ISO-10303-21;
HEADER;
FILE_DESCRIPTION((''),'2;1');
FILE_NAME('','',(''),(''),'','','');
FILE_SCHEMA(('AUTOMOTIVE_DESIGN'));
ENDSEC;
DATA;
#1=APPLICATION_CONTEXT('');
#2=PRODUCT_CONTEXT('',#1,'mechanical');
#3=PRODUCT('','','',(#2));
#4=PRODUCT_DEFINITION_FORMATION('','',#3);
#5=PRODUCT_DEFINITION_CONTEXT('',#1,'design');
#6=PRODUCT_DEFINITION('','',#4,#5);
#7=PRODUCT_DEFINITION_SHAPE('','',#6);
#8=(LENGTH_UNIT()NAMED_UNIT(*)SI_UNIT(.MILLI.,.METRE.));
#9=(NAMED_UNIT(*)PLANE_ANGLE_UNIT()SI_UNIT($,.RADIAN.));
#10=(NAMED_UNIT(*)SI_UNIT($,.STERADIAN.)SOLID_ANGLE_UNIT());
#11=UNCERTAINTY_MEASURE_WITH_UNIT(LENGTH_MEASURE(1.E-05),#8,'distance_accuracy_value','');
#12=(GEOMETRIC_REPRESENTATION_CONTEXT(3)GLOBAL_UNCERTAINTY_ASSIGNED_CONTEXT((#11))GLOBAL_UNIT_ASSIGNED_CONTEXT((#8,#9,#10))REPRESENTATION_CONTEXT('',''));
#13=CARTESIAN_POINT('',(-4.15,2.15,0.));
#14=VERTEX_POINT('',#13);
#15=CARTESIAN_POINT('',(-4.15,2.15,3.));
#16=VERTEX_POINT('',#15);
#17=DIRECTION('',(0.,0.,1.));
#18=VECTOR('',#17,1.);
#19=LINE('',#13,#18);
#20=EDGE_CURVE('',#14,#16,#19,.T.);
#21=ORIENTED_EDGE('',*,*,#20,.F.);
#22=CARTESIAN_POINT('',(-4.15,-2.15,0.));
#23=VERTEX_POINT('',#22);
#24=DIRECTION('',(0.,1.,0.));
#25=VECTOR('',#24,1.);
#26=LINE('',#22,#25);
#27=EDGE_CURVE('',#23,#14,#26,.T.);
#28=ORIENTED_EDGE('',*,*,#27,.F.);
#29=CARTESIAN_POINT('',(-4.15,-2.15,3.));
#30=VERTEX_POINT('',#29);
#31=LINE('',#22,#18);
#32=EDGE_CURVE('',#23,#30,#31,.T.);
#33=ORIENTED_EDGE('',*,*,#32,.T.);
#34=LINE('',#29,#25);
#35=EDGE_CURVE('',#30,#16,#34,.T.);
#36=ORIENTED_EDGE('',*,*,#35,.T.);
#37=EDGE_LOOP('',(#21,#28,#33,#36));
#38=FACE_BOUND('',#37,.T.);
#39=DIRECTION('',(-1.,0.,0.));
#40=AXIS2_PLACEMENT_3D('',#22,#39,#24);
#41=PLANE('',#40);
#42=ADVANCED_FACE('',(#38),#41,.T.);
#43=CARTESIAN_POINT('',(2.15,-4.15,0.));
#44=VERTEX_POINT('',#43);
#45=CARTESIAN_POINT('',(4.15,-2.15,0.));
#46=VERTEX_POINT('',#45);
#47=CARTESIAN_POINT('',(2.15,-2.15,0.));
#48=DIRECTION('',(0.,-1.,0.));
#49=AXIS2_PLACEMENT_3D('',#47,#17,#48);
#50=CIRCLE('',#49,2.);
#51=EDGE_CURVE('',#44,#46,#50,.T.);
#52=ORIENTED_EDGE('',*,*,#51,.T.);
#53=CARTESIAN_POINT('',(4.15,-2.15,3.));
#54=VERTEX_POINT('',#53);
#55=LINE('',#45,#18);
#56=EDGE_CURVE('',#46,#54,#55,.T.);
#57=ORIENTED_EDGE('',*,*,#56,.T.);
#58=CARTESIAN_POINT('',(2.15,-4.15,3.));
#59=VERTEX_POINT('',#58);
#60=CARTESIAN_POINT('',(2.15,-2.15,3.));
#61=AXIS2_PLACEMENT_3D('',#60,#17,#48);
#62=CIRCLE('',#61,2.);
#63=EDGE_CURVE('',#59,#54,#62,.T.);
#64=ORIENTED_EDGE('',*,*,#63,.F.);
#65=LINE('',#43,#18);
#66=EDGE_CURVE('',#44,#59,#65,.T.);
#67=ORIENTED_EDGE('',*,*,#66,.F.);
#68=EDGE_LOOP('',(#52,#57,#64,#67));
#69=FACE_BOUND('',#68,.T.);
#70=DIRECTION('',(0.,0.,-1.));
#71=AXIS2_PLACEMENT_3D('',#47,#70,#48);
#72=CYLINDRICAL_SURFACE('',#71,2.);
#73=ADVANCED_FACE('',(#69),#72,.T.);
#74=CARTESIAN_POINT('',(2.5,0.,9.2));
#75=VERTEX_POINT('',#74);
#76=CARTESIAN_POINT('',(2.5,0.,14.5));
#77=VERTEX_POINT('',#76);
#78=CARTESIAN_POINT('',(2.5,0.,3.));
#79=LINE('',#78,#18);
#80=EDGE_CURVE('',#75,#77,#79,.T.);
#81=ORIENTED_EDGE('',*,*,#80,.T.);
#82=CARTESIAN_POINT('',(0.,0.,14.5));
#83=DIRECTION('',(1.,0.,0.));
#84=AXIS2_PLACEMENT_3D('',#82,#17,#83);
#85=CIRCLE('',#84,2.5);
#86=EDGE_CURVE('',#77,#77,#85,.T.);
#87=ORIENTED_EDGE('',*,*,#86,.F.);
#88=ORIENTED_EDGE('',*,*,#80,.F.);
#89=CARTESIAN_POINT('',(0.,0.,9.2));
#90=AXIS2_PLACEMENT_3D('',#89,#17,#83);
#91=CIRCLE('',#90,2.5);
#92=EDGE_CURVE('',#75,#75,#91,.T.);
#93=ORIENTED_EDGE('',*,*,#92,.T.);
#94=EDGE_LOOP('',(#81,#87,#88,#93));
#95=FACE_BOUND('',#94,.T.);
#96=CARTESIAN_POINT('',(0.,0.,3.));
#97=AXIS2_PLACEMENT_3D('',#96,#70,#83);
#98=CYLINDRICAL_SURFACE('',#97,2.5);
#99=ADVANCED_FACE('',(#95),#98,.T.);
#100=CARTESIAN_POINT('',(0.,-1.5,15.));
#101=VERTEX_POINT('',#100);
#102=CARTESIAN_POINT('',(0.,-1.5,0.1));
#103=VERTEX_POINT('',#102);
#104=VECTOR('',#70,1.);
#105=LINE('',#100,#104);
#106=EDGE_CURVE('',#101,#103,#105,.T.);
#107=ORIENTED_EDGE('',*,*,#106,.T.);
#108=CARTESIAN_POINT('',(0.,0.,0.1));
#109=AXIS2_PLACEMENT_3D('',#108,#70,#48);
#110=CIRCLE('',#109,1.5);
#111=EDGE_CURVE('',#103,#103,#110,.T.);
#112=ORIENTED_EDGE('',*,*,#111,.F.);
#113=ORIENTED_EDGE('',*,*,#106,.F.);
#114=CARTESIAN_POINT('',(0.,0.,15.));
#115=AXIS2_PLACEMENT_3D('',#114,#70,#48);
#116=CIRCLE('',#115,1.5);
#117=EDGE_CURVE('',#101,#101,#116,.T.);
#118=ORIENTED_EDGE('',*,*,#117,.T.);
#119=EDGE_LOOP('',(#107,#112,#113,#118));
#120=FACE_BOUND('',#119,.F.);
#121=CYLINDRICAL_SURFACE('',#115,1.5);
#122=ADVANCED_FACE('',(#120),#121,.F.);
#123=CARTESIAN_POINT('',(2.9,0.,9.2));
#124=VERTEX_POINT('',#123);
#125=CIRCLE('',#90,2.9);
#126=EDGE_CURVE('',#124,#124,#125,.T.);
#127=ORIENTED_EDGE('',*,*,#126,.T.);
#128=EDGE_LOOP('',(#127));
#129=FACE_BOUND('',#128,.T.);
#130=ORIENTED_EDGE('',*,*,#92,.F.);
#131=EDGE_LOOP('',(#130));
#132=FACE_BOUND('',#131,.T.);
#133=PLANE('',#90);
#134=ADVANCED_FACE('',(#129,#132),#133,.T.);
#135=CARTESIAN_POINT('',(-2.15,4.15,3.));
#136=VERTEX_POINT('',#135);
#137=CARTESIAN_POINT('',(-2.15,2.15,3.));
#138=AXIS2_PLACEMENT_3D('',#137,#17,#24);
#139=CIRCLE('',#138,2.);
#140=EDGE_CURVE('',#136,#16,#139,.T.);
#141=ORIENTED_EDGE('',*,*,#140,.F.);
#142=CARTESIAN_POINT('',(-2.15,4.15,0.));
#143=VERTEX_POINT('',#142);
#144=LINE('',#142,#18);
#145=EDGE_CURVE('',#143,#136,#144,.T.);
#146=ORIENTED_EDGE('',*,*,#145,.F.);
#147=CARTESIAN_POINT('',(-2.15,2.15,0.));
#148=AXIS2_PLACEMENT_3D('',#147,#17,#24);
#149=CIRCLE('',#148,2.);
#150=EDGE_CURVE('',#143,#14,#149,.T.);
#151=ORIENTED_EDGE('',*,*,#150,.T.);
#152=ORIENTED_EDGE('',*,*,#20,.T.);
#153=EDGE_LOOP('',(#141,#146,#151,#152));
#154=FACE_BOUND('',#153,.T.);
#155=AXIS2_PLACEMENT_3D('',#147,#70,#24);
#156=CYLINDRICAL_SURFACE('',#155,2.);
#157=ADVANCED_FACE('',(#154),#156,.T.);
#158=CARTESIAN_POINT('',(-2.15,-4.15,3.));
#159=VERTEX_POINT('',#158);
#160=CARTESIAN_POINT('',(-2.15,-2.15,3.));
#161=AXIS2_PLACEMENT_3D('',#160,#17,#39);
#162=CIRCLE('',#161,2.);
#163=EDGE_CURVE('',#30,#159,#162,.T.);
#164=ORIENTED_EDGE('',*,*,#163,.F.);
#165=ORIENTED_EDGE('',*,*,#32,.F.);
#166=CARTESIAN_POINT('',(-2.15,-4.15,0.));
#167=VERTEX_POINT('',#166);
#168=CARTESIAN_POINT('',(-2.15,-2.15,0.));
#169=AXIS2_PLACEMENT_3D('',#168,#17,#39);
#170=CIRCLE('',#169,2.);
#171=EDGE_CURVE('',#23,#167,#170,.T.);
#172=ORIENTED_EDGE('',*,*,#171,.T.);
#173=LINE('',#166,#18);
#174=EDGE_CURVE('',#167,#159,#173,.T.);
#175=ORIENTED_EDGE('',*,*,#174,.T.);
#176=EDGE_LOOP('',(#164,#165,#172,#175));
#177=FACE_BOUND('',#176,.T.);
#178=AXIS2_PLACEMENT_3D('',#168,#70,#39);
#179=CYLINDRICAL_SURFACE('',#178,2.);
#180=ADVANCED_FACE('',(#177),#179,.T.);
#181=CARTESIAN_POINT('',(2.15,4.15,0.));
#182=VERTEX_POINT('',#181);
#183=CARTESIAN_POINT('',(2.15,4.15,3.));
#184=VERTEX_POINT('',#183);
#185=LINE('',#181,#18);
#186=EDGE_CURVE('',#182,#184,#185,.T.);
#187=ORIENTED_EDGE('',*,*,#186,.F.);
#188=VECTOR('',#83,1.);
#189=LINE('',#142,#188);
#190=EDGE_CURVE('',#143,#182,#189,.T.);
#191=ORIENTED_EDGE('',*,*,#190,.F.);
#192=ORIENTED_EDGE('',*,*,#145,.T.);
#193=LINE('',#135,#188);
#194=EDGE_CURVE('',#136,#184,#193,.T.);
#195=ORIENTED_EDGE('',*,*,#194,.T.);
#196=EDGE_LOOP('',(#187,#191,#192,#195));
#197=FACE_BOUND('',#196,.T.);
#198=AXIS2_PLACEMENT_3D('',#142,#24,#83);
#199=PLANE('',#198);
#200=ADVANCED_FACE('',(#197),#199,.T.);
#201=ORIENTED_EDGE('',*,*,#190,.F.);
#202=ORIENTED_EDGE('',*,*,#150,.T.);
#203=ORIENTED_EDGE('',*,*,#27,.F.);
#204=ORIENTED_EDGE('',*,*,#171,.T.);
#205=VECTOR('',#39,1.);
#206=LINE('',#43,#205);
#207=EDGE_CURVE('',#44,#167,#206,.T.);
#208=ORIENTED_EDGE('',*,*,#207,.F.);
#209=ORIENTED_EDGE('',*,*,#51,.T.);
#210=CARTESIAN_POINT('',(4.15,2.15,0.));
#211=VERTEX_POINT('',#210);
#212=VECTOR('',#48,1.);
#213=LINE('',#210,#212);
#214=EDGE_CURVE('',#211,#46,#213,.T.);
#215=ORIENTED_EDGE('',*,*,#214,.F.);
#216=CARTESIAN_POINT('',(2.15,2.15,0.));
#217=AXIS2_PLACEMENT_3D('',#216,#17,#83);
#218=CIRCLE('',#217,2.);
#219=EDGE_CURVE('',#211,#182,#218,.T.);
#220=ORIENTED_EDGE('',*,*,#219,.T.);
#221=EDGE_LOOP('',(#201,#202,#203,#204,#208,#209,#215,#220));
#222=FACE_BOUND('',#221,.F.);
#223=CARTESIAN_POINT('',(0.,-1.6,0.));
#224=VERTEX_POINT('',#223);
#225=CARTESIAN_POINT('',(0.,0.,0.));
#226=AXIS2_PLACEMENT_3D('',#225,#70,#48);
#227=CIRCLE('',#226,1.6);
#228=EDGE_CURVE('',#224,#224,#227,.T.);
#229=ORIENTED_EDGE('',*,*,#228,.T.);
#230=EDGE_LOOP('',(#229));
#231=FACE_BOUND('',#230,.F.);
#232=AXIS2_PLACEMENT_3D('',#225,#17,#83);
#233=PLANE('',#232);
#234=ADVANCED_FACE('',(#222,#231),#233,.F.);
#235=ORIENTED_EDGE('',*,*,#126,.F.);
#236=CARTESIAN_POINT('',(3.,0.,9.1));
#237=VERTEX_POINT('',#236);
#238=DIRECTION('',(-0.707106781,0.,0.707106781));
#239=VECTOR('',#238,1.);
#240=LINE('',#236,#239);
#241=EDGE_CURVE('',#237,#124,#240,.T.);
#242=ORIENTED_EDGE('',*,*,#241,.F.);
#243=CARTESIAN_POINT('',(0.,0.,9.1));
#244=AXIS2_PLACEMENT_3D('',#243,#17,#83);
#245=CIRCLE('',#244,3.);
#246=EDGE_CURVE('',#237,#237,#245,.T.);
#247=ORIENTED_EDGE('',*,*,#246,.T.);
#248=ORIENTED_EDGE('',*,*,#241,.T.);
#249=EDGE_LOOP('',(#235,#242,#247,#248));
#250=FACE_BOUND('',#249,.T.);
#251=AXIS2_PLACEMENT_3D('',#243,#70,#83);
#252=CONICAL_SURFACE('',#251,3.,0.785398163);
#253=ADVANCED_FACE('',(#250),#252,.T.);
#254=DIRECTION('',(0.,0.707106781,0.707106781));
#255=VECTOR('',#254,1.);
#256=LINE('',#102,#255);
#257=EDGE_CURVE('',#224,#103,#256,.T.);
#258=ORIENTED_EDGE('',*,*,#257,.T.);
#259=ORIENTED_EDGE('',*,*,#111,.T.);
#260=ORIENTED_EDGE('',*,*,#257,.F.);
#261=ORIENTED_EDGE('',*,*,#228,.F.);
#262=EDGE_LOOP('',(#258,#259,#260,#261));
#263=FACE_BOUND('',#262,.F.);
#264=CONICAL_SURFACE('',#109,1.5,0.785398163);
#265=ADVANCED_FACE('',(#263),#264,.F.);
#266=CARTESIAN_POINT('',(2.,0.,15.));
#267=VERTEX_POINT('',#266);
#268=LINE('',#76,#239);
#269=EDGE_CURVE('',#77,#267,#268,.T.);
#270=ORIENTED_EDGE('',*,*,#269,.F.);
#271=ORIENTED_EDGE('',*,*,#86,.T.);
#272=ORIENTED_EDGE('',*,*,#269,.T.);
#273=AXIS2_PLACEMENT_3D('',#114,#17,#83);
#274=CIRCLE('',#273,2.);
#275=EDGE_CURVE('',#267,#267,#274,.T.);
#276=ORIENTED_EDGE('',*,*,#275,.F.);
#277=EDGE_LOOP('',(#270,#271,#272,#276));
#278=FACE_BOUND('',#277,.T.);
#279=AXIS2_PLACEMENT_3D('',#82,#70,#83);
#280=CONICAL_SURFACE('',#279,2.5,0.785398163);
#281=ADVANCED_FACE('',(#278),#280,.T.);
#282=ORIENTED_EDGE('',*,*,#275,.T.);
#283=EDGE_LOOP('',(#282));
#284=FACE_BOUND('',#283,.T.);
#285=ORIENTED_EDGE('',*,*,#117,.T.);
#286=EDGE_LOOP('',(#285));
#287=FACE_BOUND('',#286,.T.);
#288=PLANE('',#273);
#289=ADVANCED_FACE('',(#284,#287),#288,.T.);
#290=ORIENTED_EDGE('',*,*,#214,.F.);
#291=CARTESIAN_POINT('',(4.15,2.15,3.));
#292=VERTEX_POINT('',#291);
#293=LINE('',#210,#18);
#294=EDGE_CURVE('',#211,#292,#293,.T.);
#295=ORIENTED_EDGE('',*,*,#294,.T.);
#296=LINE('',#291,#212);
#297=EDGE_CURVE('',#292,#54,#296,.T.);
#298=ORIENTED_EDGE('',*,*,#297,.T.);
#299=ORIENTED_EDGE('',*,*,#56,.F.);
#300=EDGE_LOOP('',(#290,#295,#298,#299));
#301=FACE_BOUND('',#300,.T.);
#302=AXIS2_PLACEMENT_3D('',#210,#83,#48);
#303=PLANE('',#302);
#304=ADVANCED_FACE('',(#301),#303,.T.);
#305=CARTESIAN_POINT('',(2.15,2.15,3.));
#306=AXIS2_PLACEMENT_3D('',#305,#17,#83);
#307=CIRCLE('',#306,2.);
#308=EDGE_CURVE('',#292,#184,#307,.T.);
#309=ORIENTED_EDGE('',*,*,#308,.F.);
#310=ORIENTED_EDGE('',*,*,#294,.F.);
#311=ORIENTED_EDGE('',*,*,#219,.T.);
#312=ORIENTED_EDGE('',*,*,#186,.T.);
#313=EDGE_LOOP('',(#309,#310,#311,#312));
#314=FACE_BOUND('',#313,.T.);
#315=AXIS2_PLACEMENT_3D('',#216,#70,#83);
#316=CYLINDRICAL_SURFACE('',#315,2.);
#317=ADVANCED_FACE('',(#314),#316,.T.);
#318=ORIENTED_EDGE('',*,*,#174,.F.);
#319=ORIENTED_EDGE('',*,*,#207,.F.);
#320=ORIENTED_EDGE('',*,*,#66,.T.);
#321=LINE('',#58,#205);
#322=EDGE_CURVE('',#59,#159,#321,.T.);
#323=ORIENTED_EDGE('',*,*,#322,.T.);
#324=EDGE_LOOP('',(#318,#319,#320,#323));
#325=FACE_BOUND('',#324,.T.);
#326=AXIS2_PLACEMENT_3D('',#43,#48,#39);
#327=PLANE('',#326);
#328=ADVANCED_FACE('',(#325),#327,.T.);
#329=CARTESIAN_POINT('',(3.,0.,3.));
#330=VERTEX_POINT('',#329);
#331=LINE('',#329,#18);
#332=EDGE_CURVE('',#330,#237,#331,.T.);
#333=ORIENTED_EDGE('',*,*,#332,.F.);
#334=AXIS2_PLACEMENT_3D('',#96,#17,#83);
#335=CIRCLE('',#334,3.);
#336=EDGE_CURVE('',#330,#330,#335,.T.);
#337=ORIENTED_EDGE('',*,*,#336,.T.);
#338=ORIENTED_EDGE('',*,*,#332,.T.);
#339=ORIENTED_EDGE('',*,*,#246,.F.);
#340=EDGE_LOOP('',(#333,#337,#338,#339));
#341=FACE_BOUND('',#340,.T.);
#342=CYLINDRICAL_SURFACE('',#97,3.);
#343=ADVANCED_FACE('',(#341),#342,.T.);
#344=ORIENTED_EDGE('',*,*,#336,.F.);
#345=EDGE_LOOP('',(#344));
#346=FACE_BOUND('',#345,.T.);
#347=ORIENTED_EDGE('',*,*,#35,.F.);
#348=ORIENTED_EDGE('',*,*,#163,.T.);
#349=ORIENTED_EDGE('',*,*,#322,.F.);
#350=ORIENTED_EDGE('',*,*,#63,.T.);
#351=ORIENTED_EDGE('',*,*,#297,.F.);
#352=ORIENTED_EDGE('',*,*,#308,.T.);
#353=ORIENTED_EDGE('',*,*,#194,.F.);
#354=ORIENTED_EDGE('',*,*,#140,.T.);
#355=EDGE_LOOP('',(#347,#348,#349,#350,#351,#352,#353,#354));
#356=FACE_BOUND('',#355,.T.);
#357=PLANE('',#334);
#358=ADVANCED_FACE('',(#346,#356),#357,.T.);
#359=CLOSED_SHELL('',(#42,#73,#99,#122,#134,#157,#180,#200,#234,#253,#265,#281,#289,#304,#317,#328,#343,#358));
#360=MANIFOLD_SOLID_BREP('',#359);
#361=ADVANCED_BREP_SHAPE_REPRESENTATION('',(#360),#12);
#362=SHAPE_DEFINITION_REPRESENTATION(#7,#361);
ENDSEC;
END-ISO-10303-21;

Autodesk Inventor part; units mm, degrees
ref_plane "YZ Plane" through (0, 0, 0) normal (1, 0, 0) x (0, 1, 0)
ref_plane "XZ Plane" through (0, 0, 0) normal (0, 1, 0) x (-1, 0, 0)
ref_plane "XY Plane" through (0, 0, 0) normal (0, 0, 1) x (1, 0, 0)
sketch "Skizze1" plane through (0, 0, 0) normal (0, 0, 1) x (1, 0, 0)
  line L0 (-2.15, 4.15) -> (2.15, 4.15)
  line L1 (4.15, 2.15) -> (4.15, -2.15)
  line L2 (2.15, -4.15) -> (-2.15, -4.15)
  line L3 (-4.15, -2.15) -> (-4.15, 2.15)
  arc A0 (-2.15, 4.15) -> (-4.15, 2.15) centre (-2.15, 2.15) ccw
  arc A1 (4.15, 2.15) -> (2.15, 4.15) centre (2.15, 2.15) ccw
  arc A2 (2.15, -4.15) -> (4.15, -2.15) centre (2.15, -2.15) ccw
  arc A3 (-4.15, -2.15) -> (-2.15, -4.15) centre (-2.15, -2.15) ccw
  line L4 (-2.15, 2.15) -> (2.15, -2.15) construction
  line L5 (2.15, 2.15) -> (-2.15, -2.15) construction
  point P0 (0, 0)
  dimension "d0" = 2
  dimension "d1" = 8.3
extrude "Extrusion1" add sketch "Skizze1" along normal blind 3
sketch "Skizze2" plane through (0, 0, 3) normal (0, 0, 1) x (1, 0, 0)
  circle A0 centre (0, 0) radius 2.5
  circle A1 centre (0, 0) radius 3
  dimension "d4" = 5
  dimension "d22" = 6
extrude "Extrusion2" add sketch "Skizze2" along normal blind 12 contours A0
sketch "Skizze3" plane through (0, 0, 15) normal (0, 0, 1) x (1, 0, 0)
  point P0 (0, 0)
  point P1 (0, 0)
hole "Bohrung1" at (0, 0, 15) direction (0, 0, -1) diameter 3 end through all
chamfer "Fase1" distance 0.5 angle 45 1 edges at (-2.5, 0, 15)
thread "Gewinde2" size "M5x0.8" class "6g" standard "ISO Metric profile" length 4.5
extrude "Extrusion3" add sketch "Skizze2" along normal blind 6.2
sketch "Skizze4" plane through (0, 0, 0) normal (0, 0, -1) x (-1, 0, 0)
  point P0 (0, 0)
  point P1 (0, 0)
hole "Bohrung2" [suppressed]
chamfer "Fasen2" distance 0.1 angle 45 2 edges at (-3, 0, 9.2) (0, 1.5, 0)
chamfer "Fasen3" [suppressed]
properties part number "Radadapter" material "Aluminium 6061"
